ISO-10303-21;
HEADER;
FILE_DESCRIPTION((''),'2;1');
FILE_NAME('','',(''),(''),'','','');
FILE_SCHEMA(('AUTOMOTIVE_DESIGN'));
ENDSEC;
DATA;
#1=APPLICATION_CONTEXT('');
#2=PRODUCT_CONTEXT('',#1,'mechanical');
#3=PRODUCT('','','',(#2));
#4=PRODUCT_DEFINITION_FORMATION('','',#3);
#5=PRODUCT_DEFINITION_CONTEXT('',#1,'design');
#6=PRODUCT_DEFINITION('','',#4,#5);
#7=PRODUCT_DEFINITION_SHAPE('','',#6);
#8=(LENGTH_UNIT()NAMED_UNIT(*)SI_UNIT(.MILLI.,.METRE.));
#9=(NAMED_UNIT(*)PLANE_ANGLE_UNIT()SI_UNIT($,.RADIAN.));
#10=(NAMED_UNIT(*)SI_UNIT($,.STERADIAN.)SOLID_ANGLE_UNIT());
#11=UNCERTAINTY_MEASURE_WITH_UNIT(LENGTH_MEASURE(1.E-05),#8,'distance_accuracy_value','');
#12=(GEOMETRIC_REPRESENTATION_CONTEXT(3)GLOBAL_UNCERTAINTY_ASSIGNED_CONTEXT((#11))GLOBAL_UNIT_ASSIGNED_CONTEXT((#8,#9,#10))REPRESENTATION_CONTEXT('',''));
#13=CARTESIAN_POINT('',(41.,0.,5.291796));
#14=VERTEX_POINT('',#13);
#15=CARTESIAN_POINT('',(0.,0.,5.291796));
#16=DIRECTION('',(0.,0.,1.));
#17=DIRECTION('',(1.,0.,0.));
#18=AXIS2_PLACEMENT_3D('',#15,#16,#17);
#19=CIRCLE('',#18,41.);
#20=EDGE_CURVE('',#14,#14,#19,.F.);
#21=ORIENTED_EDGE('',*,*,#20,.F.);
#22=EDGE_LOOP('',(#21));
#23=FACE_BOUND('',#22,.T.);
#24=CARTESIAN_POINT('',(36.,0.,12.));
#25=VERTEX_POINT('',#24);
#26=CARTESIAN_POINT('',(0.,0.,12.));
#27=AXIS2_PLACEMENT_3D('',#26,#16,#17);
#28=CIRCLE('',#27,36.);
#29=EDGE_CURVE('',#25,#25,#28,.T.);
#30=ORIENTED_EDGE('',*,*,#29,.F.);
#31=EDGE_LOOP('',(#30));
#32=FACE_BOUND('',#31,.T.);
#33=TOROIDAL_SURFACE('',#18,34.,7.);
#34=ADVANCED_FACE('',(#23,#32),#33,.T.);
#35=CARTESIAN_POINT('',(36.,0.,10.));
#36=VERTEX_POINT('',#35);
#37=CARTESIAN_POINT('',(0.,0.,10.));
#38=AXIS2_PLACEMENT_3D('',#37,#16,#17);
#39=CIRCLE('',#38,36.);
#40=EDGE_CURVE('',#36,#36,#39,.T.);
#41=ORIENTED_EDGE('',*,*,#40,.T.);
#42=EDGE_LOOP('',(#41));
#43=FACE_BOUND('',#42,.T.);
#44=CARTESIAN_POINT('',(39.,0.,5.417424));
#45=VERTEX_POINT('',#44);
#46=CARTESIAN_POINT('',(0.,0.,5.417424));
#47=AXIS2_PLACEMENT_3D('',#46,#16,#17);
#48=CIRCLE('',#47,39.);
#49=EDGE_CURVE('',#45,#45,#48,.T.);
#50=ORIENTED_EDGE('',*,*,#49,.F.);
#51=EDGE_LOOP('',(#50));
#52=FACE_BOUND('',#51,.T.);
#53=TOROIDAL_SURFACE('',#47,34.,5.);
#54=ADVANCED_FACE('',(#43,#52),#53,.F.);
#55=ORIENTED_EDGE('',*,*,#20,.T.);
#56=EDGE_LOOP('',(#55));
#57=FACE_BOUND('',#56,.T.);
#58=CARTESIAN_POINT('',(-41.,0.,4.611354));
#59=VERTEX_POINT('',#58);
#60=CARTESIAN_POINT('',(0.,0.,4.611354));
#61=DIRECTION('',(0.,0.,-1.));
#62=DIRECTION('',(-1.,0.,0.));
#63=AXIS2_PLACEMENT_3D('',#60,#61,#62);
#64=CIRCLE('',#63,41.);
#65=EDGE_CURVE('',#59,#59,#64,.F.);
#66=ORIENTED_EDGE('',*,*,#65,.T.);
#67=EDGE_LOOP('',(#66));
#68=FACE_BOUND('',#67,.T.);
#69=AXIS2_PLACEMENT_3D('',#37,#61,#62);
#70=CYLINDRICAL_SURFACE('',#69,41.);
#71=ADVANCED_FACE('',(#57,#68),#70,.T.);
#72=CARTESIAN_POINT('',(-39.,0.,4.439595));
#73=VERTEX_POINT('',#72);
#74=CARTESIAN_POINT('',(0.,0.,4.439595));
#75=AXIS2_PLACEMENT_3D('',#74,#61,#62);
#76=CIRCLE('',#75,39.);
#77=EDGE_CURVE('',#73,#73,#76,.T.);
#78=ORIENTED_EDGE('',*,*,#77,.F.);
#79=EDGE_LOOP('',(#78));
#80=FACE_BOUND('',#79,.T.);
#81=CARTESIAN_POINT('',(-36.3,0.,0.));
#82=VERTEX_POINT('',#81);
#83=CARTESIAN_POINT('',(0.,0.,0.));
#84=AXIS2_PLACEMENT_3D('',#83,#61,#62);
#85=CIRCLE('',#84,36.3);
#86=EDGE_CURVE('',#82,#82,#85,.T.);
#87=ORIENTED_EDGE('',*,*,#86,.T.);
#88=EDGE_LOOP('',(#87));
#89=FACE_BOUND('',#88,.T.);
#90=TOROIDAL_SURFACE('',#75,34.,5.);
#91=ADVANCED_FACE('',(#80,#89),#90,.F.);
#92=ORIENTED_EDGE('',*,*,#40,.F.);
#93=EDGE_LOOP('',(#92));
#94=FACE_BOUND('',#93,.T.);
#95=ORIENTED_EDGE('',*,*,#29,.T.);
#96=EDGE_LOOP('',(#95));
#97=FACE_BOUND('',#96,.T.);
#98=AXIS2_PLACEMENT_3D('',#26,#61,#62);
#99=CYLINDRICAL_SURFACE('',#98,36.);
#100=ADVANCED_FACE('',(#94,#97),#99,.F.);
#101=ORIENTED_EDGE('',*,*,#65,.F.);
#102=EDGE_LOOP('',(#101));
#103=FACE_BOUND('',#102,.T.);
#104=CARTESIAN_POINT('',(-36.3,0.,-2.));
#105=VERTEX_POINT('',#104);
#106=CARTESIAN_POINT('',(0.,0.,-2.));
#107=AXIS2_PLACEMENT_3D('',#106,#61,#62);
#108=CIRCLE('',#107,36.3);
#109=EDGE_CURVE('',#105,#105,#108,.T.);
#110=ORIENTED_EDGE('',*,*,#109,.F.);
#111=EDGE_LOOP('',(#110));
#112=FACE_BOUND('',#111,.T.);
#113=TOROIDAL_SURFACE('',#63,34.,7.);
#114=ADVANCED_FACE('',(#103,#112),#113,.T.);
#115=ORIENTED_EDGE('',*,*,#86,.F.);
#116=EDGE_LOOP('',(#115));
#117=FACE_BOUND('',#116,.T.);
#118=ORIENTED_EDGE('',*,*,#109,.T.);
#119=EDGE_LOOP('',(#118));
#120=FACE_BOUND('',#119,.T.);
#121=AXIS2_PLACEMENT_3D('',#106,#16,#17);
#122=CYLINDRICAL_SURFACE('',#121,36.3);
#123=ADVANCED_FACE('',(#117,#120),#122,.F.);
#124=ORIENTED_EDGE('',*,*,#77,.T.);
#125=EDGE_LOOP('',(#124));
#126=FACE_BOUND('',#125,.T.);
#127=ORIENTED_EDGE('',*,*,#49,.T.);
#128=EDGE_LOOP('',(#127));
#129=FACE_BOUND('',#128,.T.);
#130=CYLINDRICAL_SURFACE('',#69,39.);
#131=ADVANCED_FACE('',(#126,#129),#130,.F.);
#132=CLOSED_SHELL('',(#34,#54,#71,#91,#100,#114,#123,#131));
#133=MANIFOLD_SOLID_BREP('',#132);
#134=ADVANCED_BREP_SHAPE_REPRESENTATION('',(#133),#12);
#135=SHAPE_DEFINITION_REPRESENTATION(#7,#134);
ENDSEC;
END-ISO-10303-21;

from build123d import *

# Parameters (mm, degrees)
SKETCH1_R           = 41
SKETCH1_R_2         = 39
BOSS_EXTRUDE1_DEPTH = 10
SKETCH2_R           = 41
SKETCH2_R_2         = 36
BOSS_EXTRUDE2_DEPTH = 2
BOSS_EXTRUDE3_START = 2
SKETCH3_R           = 41
SKETCH3_R_2         = 36.3
BOSS_EXTRUDE3_DEPTH = 2
FILLET2_R           = 5
FILLET6_R           = 7


with BuildPart() as part:
    # Sketch1 → Boss-Extrude1 (new body)
    with BuildSketch(Plane.XY):
        Circle(SKETCH1_R)
        Circle(SKETCH1_R_2, mode=Mode.SUBTRACT)
    extrude(amount=BOSS_EXTRUDE1_DEPTH)

    # Sketch2 → Boss-Extrude2 (add)
    with BuildSketch(Plane.XY.offset(10)):
        Circle(SKETCH2_R)
        Circle(SKETCH2_R_2, mode=Mode.SUBTRACT)
    extrude(amount=BOSS_EXTRUDE2_DEPTH)

    # Sketch3 → Boss-Extrude3 (add)
    with BuildSketch(Plane(origin=(0, 0, 0), x_dir=(-1, 0, 0), z_dir=(0, 0, -1)).offset(BOSS_EXTRUDE3_START)):
        Circle(SKETCH3_R)
        Circle(SKETCH3_R_2, mode=Mode.SUBTRACT)
    extrude(amount=-BOSS_EXTRUDE3_DEPTH)

    # Fillet2
    # the kernel refuses this fillet: 5 mm, written as the material it adds along each edge
    with BuildSketch(Plane(origin=(0, 0, 10), x_dir=(1, 0, 0), z_dir=(0, -1, 0))) as fillet2_piece_1:
        with BuildLine():
            CenterArc((34, -4.582575695), FILLET2_R, 0, 66.421821522)
            Line((39, -4.582575695), (39.1, -4.582575695))
            Line((39.1, -4.582575695), (39.1, 0))
            Line((39.1, 0), (39, 0.1))
            ThreePointArc((39, 0.1), (37.5, 0.1), (36.04, 0.091651514))
            Line((36.04, 0.091651514), (36, 0))
        make_face()
    revolve(axis=Axis((0, 0, 10), (0, 0, 1)))
    with BuildSketch(Plane(origin=(0, 0, 0), x_dir=(1, 0, 0), z_dir=(0, -1, 0))) as fillet2_piece_2:
        with BuildLine():
            CenterArc((34, 4.439594576), FILLET2_R, 297.387107503, 62.612892497)
            Line((36.3, 0), (36.346, -0.088791892))
            ThreePointArc((36.346, -0.088791892), (37.65, -0.1), (39, -0.1))
            Line((39, -0.1), (39.1, 0))
            Line((39.1, 0), (39.1, 4.439594576))
            Line((39.1, 4.439594576), (39, 4.439594576))
        make_face()
    revolve(axis=Axis((0, 0, 0), (0, 0, 1)))

    # Fillet6
    # the kernel refuses this fillet: 7 mm, written as the material it takes off along each edge
    with BuildSketch(Plane(origin=(0, 0, -2), x_dir=(-1, 0, 0), z_dir=(0, -1, 0))) as fillet6_piece_1:
        with BuildLine():
            CenterArc((34, -6.61135387), FILLET6_R, 0, 70.817910057)
            Line((41, -6.61135387), (41.14, -6.61135387))
            Line((41.14, -6.61135387), (41.14, 0))
            Line((41.14, 0), (41, 0.14))
            ThreePointArc((41, 0.14), (38.65, 0.14), (36.346, 0.132227077))
            Line((36.346, 0.132227077), (36.3, 0))
        make_face()
    revolve(axis=Axis((0, 0, -2), (0, 0, -1)), mode=Mode.SUBTRACT)
    with BuildSketch(Plane(origin=(0, 0, 12), x_dir=(1, 0, 0), z_dir=(0, -1, 0))) as fillet6_piece_2:
        with BuildLine():
            CenterArc((34, -6.708203932), FILLET6_R, 0, 73.398450401)
            Line((36, 0), (36.04, 0.134164079))
            ThreePointArc((36.04, 0.134164079), (38.5, 0.14), (41, 0.14))
            Line((41, 0.14), (41.14, 0))
            Line((41.14, 0), (41.14, -6.708203932))
            Line((41.14, -6.708203932), (41, -6.708203932))
        make_face()
    revolve(axis=Axis((0, 0, 12), (0, 0, 1)), mode=Mode.SUBTRACT)


solid = part.part
